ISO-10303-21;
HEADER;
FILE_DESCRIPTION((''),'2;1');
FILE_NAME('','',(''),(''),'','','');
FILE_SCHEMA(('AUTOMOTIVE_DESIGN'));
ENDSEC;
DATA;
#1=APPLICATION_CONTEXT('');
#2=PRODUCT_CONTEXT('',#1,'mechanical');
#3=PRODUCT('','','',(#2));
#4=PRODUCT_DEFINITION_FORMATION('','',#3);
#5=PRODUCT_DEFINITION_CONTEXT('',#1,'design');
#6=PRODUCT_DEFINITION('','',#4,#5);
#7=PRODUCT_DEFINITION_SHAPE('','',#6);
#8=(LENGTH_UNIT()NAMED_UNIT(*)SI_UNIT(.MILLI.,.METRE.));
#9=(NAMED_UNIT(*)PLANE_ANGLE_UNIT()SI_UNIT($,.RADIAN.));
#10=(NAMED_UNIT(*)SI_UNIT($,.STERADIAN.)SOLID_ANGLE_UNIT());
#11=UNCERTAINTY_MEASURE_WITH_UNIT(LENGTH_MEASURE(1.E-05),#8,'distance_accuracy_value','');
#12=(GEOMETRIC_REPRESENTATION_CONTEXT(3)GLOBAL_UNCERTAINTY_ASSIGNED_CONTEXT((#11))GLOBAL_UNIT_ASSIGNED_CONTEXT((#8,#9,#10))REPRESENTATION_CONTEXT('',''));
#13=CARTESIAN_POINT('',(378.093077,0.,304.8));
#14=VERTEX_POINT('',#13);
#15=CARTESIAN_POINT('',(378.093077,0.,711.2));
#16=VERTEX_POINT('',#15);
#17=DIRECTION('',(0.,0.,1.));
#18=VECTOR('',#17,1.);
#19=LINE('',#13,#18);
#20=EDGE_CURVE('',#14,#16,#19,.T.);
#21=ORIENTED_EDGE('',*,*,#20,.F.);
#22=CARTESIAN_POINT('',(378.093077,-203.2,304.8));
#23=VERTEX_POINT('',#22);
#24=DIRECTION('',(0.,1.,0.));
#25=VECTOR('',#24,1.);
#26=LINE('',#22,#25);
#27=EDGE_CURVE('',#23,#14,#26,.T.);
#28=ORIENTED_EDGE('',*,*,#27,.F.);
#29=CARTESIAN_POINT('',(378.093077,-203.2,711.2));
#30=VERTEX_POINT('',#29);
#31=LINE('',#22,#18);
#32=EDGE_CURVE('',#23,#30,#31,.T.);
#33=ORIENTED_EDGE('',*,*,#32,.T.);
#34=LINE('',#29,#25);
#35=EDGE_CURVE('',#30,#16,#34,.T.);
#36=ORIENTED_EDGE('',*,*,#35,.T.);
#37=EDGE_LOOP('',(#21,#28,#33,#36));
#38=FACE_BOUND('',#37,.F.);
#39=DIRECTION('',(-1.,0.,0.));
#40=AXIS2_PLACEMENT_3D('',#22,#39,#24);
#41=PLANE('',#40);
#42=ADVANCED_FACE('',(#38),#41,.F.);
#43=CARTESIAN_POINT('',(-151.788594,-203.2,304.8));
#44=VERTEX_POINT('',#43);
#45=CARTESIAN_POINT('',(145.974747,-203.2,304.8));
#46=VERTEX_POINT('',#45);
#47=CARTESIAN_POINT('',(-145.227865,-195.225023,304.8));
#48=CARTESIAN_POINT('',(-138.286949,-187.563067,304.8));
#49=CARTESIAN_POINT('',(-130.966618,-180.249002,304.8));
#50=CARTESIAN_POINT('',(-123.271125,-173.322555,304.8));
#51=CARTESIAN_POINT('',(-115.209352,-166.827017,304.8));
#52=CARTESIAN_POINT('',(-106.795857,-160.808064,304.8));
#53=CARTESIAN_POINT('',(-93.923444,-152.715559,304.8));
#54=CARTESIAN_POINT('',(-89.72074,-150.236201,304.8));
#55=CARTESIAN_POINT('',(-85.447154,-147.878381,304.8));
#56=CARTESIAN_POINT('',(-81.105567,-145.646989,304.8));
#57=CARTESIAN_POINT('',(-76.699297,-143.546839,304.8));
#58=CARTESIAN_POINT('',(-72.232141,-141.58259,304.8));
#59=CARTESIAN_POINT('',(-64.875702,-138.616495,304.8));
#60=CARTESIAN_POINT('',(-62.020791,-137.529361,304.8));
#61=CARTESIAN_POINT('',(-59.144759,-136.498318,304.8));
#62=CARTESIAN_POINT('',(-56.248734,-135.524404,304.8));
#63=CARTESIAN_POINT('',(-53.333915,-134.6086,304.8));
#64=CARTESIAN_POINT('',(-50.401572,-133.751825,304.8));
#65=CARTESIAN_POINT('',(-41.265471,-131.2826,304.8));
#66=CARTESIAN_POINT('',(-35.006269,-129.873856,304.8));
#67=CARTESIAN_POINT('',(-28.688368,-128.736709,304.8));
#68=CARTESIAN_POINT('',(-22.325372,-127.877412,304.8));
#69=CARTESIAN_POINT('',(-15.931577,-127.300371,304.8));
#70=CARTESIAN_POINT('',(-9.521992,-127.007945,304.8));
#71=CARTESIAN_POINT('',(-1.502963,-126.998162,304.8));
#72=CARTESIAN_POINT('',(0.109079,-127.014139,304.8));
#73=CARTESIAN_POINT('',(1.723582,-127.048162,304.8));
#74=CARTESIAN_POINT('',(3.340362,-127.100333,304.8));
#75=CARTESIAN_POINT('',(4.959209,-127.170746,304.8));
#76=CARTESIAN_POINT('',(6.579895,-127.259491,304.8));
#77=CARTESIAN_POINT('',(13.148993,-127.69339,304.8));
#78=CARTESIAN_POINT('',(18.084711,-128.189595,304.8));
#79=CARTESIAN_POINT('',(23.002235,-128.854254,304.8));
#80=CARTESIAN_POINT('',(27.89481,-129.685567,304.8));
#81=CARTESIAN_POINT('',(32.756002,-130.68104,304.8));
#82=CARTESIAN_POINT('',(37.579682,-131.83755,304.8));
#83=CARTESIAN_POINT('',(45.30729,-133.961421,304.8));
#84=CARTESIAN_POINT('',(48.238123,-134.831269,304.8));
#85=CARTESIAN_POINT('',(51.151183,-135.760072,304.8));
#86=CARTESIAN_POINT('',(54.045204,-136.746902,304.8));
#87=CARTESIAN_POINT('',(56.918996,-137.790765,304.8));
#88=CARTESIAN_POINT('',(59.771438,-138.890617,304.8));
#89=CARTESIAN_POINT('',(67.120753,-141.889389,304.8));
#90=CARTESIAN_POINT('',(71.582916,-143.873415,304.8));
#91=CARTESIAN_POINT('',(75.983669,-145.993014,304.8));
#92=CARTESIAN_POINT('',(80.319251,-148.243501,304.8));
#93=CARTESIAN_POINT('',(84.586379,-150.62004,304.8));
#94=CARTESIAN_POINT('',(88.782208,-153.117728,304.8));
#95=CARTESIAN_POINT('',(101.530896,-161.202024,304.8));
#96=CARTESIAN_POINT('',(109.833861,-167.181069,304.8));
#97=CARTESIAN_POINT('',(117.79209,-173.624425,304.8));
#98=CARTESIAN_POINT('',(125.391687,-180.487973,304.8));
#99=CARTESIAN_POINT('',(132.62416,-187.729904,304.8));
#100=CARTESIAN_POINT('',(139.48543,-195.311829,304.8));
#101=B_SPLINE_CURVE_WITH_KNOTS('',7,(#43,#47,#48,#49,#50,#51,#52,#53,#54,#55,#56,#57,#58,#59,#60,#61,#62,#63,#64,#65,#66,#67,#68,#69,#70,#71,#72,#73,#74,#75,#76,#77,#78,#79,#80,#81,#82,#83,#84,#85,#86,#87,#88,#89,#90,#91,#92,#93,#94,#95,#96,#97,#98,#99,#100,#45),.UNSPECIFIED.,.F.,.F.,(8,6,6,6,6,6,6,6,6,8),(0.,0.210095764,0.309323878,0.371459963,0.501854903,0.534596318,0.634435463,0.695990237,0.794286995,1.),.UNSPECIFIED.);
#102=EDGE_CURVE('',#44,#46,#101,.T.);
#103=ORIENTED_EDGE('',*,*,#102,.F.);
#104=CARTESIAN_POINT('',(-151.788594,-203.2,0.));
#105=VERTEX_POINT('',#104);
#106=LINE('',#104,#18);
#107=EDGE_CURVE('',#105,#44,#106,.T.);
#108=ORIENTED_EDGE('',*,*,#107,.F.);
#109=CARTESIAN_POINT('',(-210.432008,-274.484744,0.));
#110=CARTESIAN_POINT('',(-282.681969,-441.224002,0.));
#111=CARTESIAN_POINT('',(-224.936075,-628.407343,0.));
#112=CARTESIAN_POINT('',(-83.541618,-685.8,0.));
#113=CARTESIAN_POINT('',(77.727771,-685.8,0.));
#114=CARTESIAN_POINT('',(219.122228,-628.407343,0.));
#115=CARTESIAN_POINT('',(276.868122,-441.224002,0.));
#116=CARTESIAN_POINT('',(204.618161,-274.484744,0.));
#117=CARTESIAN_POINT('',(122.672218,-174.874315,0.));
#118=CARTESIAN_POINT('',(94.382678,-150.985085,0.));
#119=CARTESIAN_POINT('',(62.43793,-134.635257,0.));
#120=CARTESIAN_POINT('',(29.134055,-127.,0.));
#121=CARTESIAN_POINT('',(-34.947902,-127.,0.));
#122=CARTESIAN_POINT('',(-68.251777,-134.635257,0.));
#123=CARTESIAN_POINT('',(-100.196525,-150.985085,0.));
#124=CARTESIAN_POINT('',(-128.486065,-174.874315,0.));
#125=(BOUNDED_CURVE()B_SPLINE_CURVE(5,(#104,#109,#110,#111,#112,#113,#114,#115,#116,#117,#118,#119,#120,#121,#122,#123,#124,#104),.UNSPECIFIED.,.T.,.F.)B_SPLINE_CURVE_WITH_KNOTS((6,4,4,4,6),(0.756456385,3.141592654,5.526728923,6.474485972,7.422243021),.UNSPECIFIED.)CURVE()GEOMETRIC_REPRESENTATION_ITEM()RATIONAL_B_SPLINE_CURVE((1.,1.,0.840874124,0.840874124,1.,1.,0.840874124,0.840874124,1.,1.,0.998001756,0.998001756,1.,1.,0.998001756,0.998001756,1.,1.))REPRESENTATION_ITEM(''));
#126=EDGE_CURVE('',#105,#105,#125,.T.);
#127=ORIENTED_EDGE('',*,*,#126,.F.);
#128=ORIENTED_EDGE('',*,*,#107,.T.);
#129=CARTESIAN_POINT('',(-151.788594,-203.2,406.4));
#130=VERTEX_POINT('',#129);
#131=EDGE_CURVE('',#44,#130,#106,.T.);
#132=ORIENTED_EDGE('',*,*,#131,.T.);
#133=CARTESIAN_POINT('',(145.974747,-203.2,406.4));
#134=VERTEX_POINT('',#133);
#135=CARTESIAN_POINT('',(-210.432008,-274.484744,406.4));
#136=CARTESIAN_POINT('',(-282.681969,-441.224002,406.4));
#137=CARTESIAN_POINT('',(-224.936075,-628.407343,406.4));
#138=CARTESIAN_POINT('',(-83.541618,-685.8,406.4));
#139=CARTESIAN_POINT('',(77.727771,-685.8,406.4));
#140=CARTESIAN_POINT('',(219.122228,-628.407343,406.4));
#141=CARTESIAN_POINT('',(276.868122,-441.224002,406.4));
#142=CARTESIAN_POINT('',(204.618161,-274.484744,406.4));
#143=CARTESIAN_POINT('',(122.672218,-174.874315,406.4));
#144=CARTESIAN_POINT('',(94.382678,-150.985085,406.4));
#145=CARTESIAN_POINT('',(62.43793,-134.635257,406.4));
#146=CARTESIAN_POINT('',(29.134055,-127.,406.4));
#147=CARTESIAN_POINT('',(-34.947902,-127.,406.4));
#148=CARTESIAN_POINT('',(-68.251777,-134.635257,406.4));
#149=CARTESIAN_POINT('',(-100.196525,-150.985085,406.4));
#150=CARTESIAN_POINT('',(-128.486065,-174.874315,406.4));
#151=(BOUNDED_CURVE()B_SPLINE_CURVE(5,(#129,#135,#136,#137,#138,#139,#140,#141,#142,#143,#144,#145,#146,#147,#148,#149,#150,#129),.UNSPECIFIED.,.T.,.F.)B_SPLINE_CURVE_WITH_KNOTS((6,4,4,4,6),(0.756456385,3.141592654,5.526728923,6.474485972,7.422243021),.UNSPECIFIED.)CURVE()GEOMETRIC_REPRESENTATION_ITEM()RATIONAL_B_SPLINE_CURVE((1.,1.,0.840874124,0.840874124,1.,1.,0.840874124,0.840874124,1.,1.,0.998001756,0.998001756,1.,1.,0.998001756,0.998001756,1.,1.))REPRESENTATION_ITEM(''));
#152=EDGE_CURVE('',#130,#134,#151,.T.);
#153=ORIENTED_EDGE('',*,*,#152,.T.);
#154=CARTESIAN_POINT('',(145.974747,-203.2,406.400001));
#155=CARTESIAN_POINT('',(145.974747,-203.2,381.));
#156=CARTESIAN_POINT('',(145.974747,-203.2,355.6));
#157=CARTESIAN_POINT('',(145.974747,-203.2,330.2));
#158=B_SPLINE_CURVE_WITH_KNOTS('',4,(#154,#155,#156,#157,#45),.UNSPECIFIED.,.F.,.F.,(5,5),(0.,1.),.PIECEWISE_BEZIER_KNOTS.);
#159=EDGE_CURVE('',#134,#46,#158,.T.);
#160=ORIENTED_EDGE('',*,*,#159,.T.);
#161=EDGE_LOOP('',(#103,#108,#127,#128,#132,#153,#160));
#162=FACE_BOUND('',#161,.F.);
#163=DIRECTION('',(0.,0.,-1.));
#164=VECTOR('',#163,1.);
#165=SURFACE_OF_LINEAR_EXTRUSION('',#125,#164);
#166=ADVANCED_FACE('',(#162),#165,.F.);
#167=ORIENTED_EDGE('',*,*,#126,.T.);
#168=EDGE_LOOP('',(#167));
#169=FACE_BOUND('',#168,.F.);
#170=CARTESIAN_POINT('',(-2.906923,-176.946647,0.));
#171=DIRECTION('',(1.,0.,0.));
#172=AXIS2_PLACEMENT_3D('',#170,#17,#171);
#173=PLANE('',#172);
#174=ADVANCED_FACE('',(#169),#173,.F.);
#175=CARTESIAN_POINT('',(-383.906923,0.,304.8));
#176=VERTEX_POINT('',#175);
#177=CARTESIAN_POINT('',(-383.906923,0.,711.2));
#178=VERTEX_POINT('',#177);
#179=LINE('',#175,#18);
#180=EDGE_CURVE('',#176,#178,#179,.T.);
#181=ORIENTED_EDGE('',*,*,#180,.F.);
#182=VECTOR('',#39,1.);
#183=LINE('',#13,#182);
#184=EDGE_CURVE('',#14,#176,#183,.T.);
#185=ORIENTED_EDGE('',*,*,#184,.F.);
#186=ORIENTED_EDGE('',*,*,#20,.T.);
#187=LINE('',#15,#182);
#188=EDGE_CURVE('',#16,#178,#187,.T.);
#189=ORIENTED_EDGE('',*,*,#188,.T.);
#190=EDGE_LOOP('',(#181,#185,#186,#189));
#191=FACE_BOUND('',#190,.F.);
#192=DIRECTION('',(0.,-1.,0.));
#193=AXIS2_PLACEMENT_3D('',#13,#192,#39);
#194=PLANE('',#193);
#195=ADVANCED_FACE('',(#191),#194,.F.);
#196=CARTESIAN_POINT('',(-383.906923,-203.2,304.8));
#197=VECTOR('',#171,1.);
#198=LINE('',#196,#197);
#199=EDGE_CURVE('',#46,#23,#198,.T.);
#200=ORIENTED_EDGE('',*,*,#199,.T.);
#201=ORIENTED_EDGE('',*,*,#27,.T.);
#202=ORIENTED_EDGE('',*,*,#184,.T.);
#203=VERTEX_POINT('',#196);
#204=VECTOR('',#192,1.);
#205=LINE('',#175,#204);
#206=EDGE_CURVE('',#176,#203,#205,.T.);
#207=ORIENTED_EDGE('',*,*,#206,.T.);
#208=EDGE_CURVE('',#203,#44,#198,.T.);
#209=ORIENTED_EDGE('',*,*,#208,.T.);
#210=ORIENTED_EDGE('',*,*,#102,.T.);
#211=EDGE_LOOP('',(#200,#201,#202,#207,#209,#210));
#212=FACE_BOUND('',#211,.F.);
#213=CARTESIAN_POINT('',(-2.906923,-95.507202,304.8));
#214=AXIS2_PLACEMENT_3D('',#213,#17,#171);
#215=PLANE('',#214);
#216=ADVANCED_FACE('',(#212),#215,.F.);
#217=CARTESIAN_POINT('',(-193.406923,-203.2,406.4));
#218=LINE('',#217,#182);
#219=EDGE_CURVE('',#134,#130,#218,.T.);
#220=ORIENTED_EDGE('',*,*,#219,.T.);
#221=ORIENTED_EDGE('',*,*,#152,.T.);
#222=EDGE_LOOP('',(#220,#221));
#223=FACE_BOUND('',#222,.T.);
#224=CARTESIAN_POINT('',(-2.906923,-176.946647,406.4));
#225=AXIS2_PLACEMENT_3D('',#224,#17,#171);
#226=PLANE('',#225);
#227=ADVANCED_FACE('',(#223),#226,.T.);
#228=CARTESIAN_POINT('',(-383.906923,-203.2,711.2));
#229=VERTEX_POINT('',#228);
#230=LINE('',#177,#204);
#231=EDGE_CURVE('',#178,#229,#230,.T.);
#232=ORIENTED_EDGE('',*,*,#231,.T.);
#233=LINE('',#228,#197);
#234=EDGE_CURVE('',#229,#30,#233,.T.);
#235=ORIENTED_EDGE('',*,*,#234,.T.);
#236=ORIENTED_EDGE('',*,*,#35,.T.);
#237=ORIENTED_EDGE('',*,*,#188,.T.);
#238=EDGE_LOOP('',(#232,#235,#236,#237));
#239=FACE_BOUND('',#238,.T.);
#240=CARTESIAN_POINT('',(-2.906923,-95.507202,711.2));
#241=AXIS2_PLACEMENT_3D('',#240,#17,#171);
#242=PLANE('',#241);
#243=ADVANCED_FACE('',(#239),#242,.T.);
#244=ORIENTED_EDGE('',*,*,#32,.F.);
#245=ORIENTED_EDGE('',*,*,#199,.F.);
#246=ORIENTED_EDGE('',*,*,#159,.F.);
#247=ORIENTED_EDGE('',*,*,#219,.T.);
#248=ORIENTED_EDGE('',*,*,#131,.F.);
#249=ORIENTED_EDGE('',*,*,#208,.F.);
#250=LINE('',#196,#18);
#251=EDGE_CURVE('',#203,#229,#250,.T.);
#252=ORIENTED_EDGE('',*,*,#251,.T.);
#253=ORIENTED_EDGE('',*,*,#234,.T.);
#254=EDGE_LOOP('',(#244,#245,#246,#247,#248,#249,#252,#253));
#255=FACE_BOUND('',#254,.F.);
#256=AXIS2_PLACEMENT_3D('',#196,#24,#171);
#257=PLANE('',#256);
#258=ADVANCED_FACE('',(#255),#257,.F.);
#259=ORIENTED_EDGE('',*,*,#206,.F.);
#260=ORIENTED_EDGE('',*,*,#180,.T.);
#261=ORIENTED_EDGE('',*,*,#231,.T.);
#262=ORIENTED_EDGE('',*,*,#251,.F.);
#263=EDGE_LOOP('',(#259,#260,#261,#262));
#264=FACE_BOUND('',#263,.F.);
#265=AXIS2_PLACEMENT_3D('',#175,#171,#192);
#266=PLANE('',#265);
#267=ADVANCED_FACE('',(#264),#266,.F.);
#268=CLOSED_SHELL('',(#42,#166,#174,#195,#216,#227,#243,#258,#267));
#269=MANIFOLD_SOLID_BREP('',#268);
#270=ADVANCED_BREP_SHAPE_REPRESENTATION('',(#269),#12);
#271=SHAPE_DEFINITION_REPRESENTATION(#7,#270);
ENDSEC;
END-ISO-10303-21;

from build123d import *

# Parameters (mm, degrees)
F1_DEPTH = 406.4
F2_START = 304.8
F2_DEPTH = 406.4


# Not quite as in the source:
# - a feature names something its author has since deleted; it is built from what else it names


with BuildPart() as f1:
    # F0 (on Top) → F1 (new body)
    with BuildSketch(Plane.XY):
        with BuildLine():
            Line((19.4174144417, -203.2), (145.9747472738, -203.2))
            add(Edge.make_bspline(
                [(145.9747472738, -203.2), (83.2877280017, -127), (-2.9069234974, -127)],
                knots=[5.5267289225, 5.5267289225, 5.5267289225, 6.2831853072, 6.2831853072, 6.2831853072], degree=2, weights=[1, 0.9293203773, 1]))
            add(Edge.make_bspline(
                [(-2.9069234974, -127), (-89.1015749965, -127), (-151.7885942685, -203.2)],
                knots=[0, 0, 0, 0.7564563847, 0.7564563847, 0.7564563847], degree=2, weights=[1, 0.9293203773, 1]))
            Line((-151.7885942685, -203.2), (19.4174144417, -203.2))
        make_face()
        with BuildLine():
            add(Edge.make_bspline(
                [(-151.7885942685, -203.2), (-548.8063829917, -685.8), (-2.9069234974, -685.8), (542.992535997, -685.8), (145.9747472738, -203.2)],
                knots=[0.7564563847, 0.7564563847, 0.7564563847, 3.1415926536, 3.1415926536, 5.5267289225, 5.5267289225, 5.5267289225], degree=2, weights=[1, 0.3692744729, 1, 0.3692744729, 1]))
            Line((145.9747472738, -203.2), (19.4174144417, -203.2))
            Line((19.4174144417, -203.2), (-151.7885942685, -203.2))
        make_face()
    extrude(amount=F1_DEPTH)

    # F0 (on Top) → F2 (join)
    with BuildSketch(Plane.XY.offset(F2_START)):
        with BuildLine():
            Line((378.0930765026, 0), (-383.9069234974, 0))
            Line((-383.9069234974, 0), (-383.9069234974, -203.2))
            Line((-383.9069234974, -203.2), (-286.6143286228, -203.2))
            Line((-286.6143286228, -203.2), (-151.7885942685, -203.2))
            add(Edge.make_bspline(
                [(-2.9069234974, -127), (-89.1015749965, -127), (-151.7885942685, -203.2)],
                knots=[0, 0, 0, 0.7564563847, 0.7564563847, 0.7564563847], degree=2, weights=[1, 0.9293203773, 1]))
            add(Edge.make_bspline(
                [(145.9747472738, -203.2), (83.2877280017, -127), (-2.9069234974, -127)],
                knots=[5.5267289225, 5.5267289225, 5.5267289225, 6.2831853072, 6.2831853072, 6.2831853072], degree=2, weights=[1, 0.9293203773, 1]))
            Line((145.9747472738, -203.2), (378.0930765026, -203.2))
            Line((378.0930765026, -203.2), (378.0930765026, 0))
        make_face()
        with BuildLine():
            Line((19.4174144417, -203.2), (145.9747472738, -203.2))
            add(Edge.make_bspline(
                [(145.9747472738, -203.2), (83.2877280017, -127), (-2.9069234974, -127)],
                knots=[5.5267289225, 5.5267289225, 5.5267289225, 6.2831853072, 6.2831853072, 6.2831853072], degree=2, weights=[1, 0.9293203773, 1]))
            add(Edge.make_bspline(
                [(-2.9069234974, -127), (-89.1015749965, -127), (-151.7885942685, -203.2)],
                knots=[0, 0, 0, 0.7564563847, 0.7564563847, 0.7564563847], degree=2, weights=[1, 0.9293203773, 1]))
            Line((-151.7885942685, -203.2), (19.4174144417, -203.2))
        make_face()
    extrude(amount=F2_DEPTH)


solid = f1.part
